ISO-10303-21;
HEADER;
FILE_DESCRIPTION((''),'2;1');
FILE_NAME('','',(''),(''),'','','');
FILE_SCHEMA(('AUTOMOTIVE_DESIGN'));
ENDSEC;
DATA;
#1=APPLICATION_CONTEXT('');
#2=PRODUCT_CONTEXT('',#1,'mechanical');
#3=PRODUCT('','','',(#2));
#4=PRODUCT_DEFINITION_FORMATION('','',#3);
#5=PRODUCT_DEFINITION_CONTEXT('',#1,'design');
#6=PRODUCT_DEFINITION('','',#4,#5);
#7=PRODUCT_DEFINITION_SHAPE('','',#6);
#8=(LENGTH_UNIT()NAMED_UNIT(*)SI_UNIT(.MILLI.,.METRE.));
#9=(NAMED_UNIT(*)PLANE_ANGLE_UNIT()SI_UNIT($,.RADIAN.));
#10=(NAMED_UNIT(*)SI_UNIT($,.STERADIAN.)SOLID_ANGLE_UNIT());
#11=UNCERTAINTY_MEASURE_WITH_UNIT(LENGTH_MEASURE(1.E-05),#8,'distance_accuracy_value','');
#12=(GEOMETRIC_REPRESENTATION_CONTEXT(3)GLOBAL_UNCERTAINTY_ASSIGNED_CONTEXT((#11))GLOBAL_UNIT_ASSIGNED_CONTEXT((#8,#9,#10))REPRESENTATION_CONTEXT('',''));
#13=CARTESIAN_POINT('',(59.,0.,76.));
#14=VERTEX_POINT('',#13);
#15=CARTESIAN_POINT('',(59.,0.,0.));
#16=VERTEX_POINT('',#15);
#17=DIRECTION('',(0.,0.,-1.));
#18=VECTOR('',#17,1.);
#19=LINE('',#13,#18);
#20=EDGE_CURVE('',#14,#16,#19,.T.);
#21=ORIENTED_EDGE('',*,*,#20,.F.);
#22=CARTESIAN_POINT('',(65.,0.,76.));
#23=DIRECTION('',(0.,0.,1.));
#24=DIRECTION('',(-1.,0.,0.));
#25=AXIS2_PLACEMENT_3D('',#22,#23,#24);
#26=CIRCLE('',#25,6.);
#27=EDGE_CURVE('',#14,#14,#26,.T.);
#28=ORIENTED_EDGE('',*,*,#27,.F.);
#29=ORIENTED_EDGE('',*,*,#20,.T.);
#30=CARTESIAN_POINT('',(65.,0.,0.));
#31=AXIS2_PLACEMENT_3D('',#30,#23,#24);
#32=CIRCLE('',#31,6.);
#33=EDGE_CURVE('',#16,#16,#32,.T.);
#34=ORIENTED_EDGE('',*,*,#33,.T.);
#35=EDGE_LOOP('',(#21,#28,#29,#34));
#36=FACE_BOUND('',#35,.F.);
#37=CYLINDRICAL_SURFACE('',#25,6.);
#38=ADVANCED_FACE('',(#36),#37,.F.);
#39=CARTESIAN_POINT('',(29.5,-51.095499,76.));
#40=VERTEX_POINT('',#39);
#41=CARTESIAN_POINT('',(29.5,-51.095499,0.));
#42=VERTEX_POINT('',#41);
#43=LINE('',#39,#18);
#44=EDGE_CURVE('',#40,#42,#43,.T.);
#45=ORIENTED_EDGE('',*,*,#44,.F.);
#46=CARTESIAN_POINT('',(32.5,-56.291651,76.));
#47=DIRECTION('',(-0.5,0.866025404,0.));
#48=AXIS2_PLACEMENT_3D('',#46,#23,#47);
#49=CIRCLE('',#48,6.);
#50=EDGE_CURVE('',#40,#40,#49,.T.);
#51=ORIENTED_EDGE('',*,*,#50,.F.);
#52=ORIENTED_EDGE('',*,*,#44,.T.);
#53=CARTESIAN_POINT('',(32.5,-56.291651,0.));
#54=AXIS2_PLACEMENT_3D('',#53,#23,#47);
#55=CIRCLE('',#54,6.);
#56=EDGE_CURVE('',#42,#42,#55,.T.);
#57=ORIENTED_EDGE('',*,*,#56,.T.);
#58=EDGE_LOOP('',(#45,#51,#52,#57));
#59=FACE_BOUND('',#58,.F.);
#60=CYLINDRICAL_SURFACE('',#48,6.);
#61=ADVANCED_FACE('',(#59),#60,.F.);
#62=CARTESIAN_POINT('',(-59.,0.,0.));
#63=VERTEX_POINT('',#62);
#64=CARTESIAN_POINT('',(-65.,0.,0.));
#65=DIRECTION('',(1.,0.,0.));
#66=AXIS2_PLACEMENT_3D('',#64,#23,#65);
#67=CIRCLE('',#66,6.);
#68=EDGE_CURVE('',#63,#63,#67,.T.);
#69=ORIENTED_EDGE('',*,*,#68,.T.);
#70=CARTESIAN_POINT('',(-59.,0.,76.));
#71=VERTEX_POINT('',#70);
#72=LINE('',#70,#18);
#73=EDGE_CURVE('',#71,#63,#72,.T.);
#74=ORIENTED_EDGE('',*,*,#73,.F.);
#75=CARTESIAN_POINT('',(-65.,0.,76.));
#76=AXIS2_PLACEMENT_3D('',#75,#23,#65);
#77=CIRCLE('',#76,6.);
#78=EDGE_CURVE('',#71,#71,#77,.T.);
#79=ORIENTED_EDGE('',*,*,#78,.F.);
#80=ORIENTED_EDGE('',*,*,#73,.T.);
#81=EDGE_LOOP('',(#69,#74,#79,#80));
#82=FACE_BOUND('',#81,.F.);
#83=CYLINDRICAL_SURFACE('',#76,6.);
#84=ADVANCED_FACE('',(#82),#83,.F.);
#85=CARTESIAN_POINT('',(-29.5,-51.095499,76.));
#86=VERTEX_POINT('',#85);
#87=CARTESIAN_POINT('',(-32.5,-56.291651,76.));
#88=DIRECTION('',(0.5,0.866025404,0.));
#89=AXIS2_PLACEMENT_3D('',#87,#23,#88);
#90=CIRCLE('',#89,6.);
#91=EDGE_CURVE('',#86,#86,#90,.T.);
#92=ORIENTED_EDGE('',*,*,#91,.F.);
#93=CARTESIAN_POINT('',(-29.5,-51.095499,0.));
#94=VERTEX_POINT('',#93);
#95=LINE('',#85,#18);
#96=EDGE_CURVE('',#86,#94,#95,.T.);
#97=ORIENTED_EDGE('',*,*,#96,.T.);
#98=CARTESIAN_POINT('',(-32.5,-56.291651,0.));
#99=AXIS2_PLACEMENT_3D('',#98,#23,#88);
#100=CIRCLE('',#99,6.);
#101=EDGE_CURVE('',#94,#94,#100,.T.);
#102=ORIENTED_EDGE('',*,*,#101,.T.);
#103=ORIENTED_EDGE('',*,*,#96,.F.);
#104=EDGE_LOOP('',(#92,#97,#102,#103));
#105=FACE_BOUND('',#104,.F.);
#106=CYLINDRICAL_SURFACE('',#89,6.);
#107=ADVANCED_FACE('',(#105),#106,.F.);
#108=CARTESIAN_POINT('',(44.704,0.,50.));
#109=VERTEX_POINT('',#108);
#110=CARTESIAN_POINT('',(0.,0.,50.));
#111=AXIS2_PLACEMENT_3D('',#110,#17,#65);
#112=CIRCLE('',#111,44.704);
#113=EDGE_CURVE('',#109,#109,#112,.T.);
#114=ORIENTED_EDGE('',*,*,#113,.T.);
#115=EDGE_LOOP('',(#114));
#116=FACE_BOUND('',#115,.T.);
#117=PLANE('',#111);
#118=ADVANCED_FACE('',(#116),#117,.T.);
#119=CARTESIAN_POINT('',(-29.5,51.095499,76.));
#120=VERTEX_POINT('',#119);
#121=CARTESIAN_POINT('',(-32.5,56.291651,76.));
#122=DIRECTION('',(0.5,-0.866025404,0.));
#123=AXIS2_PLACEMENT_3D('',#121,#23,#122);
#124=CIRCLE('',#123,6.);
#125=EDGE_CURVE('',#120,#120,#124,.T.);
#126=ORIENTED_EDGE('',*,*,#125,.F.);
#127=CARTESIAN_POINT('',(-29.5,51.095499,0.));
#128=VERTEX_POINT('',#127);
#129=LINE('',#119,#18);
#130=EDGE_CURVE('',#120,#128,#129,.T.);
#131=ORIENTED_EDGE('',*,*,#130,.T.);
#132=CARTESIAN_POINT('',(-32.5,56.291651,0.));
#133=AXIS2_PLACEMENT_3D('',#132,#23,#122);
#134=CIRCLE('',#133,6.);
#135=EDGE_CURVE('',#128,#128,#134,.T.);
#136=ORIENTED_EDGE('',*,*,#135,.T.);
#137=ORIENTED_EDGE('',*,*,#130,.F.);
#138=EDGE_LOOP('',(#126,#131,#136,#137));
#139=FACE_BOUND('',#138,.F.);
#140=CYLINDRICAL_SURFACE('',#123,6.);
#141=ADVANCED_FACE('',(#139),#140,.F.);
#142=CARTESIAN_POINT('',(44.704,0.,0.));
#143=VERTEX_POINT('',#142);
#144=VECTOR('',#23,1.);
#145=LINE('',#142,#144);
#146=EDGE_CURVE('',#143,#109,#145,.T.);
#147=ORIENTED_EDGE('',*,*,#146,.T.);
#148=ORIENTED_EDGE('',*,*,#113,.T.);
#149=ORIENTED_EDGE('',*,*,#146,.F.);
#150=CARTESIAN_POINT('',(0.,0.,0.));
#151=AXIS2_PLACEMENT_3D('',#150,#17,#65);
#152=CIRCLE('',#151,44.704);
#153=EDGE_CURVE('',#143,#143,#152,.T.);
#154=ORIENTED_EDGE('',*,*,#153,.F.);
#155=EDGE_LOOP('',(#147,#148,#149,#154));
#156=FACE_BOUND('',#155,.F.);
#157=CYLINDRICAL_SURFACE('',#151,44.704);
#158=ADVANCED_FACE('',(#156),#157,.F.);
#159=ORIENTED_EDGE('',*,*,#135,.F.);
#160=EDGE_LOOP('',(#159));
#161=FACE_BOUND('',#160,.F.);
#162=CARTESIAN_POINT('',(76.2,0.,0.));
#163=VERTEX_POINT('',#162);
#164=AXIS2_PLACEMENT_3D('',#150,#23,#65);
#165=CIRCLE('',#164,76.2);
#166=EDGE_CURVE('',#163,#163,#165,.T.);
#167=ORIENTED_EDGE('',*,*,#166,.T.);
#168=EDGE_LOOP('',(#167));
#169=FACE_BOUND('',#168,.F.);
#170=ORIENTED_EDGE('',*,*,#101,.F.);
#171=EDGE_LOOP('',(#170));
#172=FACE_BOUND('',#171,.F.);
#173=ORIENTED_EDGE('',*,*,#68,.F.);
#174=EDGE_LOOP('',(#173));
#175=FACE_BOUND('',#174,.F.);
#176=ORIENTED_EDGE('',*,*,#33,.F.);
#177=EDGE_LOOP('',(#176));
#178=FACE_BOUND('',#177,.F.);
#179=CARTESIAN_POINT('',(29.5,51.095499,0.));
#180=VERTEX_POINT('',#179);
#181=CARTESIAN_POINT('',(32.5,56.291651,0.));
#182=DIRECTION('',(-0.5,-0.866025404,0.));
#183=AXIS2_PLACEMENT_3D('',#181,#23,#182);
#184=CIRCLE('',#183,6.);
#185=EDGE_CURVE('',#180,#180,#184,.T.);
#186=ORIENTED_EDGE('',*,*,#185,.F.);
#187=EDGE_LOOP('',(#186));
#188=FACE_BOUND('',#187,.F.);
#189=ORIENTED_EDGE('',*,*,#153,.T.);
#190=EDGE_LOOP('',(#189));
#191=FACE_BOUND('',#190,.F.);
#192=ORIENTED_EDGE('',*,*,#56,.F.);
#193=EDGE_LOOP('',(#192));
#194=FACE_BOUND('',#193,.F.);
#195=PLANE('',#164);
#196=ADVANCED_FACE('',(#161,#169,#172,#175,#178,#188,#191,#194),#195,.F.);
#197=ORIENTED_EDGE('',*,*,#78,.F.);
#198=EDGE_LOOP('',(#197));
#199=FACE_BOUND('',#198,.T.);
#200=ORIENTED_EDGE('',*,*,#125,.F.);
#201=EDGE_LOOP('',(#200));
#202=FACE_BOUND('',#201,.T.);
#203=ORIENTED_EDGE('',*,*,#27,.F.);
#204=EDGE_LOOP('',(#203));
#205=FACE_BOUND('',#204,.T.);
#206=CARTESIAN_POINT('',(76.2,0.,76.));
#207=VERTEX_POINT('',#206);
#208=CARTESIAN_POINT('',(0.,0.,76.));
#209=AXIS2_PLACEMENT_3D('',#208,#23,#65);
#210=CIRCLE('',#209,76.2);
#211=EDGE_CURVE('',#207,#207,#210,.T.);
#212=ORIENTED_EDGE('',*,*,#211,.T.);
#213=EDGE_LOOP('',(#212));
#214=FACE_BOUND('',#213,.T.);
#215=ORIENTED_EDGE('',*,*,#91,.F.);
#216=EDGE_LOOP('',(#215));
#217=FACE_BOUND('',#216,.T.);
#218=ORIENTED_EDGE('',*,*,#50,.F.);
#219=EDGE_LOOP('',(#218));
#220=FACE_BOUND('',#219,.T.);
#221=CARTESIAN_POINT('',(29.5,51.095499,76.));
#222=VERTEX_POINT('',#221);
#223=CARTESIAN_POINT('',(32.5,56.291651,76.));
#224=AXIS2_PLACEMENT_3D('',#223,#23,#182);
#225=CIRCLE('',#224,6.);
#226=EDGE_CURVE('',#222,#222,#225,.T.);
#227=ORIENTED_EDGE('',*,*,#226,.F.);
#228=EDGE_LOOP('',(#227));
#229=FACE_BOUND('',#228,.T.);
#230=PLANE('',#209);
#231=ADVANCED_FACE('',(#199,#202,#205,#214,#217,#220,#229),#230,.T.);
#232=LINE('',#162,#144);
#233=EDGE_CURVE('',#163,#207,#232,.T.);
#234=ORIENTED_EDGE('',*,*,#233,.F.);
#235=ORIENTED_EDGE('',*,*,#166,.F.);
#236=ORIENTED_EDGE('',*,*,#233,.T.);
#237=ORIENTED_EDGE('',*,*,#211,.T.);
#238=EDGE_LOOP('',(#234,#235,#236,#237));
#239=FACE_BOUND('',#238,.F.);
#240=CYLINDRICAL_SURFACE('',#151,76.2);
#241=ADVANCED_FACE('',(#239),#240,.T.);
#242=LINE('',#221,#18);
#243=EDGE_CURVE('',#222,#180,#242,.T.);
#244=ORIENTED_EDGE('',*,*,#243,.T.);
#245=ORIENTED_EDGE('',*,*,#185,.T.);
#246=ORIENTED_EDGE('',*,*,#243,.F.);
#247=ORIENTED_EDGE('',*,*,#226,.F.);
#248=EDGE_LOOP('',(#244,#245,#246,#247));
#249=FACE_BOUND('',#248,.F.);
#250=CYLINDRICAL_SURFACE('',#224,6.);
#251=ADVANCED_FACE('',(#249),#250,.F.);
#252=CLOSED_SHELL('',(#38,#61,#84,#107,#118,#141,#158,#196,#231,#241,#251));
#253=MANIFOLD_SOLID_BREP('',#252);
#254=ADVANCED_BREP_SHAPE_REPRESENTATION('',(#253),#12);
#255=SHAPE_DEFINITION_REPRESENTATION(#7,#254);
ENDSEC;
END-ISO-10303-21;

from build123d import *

# Parameters (mm, degrees)
F0_R            = 76.2
F1_DEPTH        = 76
F2_R            = 44.704
F3_DEPTH        = 50
F4_R            = 6
F5_DEPTH        = 76
F5_COPIES_COUNT = 6


# Not quite as in the source:
# - a pattern or mirror of a feature is missing from the dataset's text; its kind, count and spacing are read off the source's solid


with BuildPart() as f1:
    # F0 (on Top) → F1 (new body)
    with BuildSketch(Plane.XY):
        Circle(F0_R)
    extrude(amount=F1_DEPTH)

    # F2 (on face) → F3 (cut)
    with BuildSketch(Plane(origin=(0, 0, 0), x_dir=(1, 0, 0), z_dir=(0, 0, -1))):
        Circle(F2_R)
    extrude(amount=-F3_DEPTH, mode=Mode.SUBTRACT)

    # F4 (on face) → F5 (cut)
    with BuildSketch(Plane.XY.offset(76)):
        with Locations((-65, 0)):
            Circle(F4_R)
    f5 = extrude(amount=-F5_DEPTH, mode=Mode.SUBTRACT)

    # F5_copies: F5 ×6 about axis
    f5_copies_axis = Axis((0, 0, 0), (0, 0, 1))
    for i in range(1, F5_COPIES_COUNT):
        add(f5.rotate(f5_copies_axis, i * 360 / F5_COPIES_COUNT), mode=Mode.SUBTRACT)


solid = f1.part
